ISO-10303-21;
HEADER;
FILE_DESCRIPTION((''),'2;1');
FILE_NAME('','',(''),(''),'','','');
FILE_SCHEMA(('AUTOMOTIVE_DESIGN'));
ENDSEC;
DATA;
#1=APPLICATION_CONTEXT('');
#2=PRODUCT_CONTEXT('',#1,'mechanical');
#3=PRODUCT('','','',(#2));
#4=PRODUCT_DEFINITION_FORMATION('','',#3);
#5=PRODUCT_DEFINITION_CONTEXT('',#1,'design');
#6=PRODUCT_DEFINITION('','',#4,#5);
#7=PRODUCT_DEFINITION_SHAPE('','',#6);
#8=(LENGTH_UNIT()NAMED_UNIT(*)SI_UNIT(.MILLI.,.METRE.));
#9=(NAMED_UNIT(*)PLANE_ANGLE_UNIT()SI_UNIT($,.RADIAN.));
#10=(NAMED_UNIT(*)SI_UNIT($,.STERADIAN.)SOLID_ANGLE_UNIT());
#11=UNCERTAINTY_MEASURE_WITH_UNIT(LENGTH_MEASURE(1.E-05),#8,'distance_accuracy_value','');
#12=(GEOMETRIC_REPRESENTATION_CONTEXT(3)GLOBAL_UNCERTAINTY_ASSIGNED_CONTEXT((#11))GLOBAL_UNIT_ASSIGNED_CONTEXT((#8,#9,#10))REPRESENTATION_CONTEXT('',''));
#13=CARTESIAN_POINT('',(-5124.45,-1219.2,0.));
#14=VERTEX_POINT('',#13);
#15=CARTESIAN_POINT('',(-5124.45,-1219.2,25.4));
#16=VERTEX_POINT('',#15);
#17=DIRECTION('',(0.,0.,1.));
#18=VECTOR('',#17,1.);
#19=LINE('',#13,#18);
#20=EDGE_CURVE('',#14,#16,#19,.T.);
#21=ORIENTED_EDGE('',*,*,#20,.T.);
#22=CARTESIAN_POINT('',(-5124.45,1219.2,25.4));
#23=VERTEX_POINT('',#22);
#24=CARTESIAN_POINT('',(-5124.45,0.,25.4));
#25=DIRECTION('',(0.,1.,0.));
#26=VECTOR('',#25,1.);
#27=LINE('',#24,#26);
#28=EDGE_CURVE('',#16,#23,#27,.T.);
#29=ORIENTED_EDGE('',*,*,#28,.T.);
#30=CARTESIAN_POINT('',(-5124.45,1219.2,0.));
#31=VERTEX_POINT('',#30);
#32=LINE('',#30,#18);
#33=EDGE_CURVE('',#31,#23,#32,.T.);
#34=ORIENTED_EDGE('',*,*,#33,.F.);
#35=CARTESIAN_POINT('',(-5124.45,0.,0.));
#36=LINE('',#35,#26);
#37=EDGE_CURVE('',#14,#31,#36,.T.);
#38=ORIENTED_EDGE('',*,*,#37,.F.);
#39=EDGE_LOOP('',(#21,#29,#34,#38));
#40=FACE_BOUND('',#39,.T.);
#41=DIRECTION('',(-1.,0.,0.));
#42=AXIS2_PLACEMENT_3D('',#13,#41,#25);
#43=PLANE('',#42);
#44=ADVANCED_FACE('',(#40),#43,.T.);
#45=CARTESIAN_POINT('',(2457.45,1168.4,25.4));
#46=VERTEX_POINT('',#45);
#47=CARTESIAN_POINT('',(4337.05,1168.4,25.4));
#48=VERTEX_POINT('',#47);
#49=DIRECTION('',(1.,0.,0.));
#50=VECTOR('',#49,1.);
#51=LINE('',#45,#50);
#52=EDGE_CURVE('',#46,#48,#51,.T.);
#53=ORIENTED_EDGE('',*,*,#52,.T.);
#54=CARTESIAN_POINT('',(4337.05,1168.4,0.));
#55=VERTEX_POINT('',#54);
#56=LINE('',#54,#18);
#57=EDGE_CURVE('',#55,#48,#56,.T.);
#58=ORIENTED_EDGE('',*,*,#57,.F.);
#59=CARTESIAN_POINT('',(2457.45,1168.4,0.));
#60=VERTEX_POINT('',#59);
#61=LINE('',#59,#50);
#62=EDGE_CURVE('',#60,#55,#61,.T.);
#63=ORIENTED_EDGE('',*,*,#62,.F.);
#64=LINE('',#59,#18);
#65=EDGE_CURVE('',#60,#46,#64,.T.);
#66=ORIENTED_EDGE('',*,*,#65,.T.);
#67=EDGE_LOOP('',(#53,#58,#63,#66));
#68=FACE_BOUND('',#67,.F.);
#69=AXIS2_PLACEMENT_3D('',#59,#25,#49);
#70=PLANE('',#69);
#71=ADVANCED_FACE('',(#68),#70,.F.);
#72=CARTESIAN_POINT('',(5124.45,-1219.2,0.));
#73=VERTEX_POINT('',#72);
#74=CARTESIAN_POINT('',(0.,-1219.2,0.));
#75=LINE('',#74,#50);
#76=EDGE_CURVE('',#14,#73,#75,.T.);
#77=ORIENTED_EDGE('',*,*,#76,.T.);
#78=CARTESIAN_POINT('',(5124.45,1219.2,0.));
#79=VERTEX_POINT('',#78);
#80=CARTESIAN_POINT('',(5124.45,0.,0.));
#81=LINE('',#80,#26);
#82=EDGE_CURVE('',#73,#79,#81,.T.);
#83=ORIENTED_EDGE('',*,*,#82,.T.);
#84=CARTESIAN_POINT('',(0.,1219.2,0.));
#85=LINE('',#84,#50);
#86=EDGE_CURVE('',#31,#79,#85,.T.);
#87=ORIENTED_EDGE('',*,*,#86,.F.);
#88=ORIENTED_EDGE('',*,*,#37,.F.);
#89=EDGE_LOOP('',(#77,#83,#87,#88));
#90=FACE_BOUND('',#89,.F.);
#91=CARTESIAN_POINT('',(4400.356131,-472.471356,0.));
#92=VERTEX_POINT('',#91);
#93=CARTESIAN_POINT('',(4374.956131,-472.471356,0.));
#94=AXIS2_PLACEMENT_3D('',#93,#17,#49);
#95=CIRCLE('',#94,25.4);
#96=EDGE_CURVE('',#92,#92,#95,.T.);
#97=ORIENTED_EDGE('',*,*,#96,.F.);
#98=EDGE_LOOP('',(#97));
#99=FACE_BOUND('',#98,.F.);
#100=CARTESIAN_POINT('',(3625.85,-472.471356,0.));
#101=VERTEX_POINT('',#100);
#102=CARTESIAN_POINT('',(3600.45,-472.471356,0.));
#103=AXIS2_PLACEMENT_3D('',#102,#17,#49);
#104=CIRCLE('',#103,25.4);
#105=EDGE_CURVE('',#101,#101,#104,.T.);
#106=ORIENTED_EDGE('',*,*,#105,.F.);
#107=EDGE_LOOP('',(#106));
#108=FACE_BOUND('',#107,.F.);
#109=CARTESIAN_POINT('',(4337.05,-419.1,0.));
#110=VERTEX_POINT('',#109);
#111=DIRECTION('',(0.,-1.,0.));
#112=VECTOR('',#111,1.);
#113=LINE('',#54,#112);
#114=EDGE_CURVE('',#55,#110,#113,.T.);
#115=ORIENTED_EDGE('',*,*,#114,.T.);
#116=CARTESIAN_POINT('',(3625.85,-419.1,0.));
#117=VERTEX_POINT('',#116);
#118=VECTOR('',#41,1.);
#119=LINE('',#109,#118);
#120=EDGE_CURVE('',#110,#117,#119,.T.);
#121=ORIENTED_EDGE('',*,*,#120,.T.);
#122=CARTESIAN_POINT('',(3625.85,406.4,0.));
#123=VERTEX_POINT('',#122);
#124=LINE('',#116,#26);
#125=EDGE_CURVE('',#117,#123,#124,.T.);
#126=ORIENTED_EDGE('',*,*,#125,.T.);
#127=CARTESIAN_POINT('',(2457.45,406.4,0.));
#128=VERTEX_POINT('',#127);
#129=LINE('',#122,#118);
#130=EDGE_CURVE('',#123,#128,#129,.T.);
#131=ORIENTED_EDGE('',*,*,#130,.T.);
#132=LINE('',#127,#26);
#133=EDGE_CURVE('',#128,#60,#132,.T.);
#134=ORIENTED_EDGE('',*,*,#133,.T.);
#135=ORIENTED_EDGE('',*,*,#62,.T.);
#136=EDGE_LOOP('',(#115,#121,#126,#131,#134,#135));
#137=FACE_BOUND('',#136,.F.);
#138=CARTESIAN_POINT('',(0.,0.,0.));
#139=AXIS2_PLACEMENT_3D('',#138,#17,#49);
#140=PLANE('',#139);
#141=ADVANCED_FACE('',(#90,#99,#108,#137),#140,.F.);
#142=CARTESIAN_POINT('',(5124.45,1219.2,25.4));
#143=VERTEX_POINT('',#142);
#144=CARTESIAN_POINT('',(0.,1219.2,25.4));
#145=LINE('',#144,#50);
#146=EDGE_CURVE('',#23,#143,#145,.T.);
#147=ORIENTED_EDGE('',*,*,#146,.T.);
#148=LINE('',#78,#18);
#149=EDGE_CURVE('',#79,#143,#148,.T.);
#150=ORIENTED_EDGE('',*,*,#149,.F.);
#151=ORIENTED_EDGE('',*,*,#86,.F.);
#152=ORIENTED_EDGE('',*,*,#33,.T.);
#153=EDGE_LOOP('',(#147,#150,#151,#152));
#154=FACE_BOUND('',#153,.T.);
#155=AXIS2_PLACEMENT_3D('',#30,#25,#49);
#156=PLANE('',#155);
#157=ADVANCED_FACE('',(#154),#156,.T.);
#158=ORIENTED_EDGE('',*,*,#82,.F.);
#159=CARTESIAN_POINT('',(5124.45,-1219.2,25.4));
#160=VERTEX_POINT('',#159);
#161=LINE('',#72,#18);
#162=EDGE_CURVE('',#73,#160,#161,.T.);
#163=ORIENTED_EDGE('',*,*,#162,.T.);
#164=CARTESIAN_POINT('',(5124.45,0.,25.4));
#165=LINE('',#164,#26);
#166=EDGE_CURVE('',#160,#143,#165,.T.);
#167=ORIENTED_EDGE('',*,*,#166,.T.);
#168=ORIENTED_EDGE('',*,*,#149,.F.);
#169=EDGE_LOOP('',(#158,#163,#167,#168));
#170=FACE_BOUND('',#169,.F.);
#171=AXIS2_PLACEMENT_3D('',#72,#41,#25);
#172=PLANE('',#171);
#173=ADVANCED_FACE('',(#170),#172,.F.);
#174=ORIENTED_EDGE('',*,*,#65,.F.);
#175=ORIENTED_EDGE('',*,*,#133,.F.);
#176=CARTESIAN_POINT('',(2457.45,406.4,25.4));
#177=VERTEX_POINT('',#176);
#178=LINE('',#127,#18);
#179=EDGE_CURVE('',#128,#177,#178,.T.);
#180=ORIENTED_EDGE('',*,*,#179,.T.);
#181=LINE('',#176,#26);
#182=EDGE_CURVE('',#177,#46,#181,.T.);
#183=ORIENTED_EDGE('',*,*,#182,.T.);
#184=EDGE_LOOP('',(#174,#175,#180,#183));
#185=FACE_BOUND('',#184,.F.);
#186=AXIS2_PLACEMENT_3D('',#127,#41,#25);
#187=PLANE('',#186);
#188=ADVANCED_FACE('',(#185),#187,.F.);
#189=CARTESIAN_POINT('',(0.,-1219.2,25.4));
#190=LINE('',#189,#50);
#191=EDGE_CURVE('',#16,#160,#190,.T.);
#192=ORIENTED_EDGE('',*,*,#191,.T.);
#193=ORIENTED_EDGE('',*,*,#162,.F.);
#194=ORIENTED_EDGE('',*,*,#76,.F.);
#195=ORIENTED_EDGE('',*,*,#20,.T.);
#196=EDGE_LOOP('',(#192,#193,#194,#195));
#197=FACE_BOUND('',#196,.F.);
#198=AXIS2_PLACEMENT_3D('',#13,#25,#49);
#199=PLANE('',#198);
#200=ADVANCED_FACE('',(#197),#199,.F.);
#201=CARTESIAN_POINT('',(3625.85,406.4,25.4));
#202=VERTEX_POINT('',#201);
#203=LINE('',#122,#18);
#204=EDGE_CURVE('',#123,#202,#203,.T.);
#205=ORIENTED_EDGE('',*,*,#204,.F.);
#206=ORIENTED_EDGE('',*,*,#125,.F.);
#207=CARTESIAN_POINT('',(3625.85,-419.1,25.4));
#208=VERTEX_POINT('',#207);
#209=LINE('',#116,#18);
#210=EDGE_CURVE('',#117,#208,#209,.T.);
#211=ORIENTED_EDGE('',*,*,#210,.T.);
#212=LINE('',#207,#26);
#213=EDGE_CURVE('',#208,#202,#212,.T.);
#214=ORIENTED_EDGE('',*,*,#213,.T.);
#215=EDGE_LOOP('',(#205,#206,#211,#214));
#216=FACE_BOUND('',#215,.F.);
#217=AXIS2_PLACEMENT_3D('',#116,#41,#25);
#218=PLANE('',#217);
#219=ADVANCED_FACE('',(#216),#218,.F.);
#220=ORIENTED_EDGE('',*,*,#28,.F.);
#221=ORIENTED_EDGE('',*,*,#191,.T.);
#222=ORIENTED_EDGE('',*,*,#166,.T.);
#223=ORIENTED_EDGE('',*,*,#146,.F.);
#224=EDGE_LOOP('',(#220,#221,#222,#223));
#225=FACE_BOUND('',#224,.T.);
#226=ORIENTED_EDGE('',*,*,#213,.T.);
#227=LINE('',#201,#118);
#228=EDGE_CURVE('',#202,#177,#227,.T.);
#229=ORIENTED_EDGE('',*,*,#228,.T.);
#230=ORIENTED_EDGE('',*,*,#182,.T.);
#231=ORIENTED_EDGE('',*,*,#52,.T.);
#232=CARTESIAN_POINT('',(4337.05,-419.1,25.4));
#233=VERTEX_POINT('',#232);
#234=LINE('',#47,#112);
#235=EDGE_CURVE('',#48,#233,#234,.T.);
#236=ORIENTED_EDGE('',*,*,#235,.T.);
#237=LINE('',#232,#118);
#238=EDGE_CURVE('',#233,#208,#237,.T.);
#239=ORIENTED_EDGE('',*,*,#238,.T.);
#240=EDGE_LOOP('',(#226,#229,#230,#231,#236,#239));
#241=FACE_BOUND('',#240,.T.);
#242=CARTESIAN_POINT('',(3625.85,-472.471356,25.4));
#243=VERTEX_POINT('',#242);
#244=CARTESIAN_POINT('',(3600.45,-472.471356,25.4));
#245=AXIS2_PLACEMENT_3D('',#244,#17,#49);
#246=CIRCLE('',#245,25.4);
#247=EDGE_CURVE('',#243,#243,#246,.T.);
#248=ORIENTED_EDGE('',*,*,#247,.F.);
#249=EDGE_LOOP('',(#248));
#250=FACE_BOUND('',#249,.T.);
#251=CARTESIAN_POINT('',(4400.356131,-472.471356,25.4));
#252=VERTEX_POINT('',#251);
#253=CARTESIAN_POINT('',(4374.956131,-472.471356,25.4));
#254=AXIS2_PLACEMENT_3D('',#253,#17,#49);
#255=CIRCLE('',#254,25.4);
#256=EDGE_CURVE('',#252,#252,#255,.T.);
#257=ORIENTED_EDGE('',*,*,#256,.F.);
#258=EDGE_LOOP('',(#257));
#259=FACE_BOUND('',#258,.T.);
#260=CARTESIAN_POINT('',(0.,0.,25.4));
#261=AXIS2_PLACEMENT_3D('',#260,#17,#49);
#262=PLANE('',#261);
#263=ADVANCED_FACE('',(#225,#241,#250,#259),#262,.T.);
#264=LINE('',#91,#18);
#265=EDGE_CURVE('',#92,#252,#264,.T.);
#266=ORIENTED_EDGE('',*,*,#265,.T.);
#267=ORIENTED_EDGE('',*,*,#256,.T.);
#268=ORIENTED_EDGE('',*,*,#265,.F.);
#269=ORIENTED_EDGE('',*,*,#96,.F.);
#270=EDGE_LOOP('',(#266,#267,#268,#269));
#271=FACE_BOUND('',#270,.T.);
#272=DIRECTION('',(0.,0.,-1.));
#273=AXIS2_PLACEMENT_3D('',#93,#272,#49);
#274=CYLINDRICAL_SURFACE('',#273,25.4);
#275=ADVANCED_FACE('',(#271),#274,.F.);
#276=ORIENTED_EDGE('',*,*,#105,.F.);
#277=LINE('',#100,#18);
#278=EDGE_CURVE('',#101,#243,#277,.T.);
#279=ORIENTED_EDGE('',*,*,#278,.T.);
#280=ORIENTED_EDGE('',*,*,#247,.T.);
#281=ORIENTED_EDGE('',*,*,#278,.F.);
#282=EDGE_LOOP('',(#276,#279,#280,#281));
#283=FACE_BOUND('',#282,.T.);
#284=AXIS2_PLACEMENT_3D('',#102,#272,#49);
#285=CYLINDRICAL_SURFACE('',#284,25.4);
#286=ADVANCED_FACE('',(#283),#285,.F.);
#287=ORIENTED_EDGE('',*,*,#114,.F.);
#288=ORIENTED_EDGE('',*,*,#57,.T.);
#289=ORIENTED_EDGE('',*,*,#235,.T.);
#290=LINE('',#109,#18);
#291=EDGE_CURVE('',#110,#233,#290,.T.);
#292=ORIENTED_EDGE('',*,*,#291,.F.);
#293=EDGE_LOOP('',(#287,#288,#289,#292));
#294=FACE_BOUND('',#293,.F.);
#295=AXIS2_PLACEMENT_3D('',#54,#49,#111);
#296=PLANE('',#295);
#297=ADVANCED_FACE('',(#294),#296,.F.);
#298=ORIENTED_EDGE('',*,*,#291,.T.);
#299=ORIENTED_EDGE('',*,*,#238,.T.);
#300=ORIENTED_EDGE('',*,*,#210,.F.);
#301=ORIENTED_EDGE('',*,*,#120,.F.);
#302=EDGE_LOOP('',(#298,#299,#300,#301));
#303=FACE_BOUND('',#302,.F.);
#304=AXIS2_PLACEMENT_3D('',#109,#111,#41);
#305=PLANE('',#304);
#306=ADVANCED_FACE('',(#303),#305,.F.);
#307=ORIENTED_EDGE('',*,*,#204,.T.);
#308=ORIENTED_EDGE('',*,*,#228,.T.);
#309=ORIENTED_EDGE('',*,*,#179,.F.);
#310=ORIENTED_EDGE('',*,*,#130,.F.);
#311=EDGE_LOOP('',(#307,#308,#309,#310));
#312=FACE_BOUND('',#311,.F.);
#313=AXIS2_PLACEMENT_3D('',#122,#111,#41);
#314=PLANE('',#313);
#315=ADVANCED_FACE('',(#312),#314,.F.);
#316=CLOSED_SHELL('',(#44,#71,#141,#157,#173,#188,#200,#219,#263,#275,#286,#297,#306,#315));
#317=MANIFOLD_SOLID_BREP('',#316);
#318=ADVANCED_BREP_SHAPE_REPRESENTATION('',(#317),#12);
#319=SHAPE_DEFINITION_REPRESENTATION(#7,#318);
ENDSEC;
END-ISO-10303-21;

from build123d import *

# Parameters (mm, degrees)
F0_W     = 10248.9
F0_H     = 2438.4
F0_W_2   = 304.8
F0_H_2   = 304.8
F0_R     = 25.4
F1_DEPTH = 25.4


# Not quite as in the source:
# - a feature names something its author has since deleted; it is built from what else it names


with BuildPart() as f1:
    # F0 (on Top) → F1 (new body)
    with BuildSketch(Plane.XY):
        Rectangle(F0_W, F0_H)
        with Locations((-4908.55, -1003.3)):
            Rectangle(F0_W_2, F0_H_2, mode=Mode.SUBTRACT)
        with Locations((1466.85, -1003.3)):
            Rectangle(F0_W_2, F0_H_2, mode=Mode.SUBTRACT)
        with Locations((3600.45, -472.4713563919)):
            Circle(F0_R, mode=Mode.SUBTRACT)
        with Locations((4374.9561309814, -472.4713563919)):
            Circle(F0_R, mode=Mode.SUBTRACT)
        with Locations((-4908.55, 1003.3)):
            Rectangle(F0_W_2, F0_H_2, mode=Mode.SUBTRACT)
        with Locations((2397.383928299, 328.731328249)):
            Circle(F0_R, mode=Mode.SUBTRACT)
        with Locations((3600.45, 328.731328249)):
            Circle(F0_R, mode=Mode.SUBTRACT)
        Polygon((2457.45, 1168.4), (4337.05, 1168.4), (4337.05, -419.1), (3625.85, -419.1), (3625.85, 328.731328249), (3625.85, 406.4), (2457.45, 406.4), align=None, mode=Mode.SUBTRACT)
        with Locations((1466.85, 1003.3)):
            Rectangle(F0_W_2, F0_H_2, mode=Mode.SUBTRACT)
        with Locations((-4908.55, 1003.3)):
            Rectangle(F0_W_2, F0_H_2)
        with Locations((1466.85, 1003.3)):
            Rectangle(F0_W_2, F0_H_2)
        with Locations((1466.85, -1003.3)):
            Rectangle(F0_W_2, F0_H_2)
        with Locations((-4908.55, -1003.3)):
            Rectangle(F0_W_2, F0_H_2)
        with Locations((3600.45, 328.731328249)):
            Circle(F0_R)
        with Locations((2397.383928299, 328.731328249)):
            Circle(F0_R)
    extrude(amount=F1_DEPTH)


solid = f1.part
